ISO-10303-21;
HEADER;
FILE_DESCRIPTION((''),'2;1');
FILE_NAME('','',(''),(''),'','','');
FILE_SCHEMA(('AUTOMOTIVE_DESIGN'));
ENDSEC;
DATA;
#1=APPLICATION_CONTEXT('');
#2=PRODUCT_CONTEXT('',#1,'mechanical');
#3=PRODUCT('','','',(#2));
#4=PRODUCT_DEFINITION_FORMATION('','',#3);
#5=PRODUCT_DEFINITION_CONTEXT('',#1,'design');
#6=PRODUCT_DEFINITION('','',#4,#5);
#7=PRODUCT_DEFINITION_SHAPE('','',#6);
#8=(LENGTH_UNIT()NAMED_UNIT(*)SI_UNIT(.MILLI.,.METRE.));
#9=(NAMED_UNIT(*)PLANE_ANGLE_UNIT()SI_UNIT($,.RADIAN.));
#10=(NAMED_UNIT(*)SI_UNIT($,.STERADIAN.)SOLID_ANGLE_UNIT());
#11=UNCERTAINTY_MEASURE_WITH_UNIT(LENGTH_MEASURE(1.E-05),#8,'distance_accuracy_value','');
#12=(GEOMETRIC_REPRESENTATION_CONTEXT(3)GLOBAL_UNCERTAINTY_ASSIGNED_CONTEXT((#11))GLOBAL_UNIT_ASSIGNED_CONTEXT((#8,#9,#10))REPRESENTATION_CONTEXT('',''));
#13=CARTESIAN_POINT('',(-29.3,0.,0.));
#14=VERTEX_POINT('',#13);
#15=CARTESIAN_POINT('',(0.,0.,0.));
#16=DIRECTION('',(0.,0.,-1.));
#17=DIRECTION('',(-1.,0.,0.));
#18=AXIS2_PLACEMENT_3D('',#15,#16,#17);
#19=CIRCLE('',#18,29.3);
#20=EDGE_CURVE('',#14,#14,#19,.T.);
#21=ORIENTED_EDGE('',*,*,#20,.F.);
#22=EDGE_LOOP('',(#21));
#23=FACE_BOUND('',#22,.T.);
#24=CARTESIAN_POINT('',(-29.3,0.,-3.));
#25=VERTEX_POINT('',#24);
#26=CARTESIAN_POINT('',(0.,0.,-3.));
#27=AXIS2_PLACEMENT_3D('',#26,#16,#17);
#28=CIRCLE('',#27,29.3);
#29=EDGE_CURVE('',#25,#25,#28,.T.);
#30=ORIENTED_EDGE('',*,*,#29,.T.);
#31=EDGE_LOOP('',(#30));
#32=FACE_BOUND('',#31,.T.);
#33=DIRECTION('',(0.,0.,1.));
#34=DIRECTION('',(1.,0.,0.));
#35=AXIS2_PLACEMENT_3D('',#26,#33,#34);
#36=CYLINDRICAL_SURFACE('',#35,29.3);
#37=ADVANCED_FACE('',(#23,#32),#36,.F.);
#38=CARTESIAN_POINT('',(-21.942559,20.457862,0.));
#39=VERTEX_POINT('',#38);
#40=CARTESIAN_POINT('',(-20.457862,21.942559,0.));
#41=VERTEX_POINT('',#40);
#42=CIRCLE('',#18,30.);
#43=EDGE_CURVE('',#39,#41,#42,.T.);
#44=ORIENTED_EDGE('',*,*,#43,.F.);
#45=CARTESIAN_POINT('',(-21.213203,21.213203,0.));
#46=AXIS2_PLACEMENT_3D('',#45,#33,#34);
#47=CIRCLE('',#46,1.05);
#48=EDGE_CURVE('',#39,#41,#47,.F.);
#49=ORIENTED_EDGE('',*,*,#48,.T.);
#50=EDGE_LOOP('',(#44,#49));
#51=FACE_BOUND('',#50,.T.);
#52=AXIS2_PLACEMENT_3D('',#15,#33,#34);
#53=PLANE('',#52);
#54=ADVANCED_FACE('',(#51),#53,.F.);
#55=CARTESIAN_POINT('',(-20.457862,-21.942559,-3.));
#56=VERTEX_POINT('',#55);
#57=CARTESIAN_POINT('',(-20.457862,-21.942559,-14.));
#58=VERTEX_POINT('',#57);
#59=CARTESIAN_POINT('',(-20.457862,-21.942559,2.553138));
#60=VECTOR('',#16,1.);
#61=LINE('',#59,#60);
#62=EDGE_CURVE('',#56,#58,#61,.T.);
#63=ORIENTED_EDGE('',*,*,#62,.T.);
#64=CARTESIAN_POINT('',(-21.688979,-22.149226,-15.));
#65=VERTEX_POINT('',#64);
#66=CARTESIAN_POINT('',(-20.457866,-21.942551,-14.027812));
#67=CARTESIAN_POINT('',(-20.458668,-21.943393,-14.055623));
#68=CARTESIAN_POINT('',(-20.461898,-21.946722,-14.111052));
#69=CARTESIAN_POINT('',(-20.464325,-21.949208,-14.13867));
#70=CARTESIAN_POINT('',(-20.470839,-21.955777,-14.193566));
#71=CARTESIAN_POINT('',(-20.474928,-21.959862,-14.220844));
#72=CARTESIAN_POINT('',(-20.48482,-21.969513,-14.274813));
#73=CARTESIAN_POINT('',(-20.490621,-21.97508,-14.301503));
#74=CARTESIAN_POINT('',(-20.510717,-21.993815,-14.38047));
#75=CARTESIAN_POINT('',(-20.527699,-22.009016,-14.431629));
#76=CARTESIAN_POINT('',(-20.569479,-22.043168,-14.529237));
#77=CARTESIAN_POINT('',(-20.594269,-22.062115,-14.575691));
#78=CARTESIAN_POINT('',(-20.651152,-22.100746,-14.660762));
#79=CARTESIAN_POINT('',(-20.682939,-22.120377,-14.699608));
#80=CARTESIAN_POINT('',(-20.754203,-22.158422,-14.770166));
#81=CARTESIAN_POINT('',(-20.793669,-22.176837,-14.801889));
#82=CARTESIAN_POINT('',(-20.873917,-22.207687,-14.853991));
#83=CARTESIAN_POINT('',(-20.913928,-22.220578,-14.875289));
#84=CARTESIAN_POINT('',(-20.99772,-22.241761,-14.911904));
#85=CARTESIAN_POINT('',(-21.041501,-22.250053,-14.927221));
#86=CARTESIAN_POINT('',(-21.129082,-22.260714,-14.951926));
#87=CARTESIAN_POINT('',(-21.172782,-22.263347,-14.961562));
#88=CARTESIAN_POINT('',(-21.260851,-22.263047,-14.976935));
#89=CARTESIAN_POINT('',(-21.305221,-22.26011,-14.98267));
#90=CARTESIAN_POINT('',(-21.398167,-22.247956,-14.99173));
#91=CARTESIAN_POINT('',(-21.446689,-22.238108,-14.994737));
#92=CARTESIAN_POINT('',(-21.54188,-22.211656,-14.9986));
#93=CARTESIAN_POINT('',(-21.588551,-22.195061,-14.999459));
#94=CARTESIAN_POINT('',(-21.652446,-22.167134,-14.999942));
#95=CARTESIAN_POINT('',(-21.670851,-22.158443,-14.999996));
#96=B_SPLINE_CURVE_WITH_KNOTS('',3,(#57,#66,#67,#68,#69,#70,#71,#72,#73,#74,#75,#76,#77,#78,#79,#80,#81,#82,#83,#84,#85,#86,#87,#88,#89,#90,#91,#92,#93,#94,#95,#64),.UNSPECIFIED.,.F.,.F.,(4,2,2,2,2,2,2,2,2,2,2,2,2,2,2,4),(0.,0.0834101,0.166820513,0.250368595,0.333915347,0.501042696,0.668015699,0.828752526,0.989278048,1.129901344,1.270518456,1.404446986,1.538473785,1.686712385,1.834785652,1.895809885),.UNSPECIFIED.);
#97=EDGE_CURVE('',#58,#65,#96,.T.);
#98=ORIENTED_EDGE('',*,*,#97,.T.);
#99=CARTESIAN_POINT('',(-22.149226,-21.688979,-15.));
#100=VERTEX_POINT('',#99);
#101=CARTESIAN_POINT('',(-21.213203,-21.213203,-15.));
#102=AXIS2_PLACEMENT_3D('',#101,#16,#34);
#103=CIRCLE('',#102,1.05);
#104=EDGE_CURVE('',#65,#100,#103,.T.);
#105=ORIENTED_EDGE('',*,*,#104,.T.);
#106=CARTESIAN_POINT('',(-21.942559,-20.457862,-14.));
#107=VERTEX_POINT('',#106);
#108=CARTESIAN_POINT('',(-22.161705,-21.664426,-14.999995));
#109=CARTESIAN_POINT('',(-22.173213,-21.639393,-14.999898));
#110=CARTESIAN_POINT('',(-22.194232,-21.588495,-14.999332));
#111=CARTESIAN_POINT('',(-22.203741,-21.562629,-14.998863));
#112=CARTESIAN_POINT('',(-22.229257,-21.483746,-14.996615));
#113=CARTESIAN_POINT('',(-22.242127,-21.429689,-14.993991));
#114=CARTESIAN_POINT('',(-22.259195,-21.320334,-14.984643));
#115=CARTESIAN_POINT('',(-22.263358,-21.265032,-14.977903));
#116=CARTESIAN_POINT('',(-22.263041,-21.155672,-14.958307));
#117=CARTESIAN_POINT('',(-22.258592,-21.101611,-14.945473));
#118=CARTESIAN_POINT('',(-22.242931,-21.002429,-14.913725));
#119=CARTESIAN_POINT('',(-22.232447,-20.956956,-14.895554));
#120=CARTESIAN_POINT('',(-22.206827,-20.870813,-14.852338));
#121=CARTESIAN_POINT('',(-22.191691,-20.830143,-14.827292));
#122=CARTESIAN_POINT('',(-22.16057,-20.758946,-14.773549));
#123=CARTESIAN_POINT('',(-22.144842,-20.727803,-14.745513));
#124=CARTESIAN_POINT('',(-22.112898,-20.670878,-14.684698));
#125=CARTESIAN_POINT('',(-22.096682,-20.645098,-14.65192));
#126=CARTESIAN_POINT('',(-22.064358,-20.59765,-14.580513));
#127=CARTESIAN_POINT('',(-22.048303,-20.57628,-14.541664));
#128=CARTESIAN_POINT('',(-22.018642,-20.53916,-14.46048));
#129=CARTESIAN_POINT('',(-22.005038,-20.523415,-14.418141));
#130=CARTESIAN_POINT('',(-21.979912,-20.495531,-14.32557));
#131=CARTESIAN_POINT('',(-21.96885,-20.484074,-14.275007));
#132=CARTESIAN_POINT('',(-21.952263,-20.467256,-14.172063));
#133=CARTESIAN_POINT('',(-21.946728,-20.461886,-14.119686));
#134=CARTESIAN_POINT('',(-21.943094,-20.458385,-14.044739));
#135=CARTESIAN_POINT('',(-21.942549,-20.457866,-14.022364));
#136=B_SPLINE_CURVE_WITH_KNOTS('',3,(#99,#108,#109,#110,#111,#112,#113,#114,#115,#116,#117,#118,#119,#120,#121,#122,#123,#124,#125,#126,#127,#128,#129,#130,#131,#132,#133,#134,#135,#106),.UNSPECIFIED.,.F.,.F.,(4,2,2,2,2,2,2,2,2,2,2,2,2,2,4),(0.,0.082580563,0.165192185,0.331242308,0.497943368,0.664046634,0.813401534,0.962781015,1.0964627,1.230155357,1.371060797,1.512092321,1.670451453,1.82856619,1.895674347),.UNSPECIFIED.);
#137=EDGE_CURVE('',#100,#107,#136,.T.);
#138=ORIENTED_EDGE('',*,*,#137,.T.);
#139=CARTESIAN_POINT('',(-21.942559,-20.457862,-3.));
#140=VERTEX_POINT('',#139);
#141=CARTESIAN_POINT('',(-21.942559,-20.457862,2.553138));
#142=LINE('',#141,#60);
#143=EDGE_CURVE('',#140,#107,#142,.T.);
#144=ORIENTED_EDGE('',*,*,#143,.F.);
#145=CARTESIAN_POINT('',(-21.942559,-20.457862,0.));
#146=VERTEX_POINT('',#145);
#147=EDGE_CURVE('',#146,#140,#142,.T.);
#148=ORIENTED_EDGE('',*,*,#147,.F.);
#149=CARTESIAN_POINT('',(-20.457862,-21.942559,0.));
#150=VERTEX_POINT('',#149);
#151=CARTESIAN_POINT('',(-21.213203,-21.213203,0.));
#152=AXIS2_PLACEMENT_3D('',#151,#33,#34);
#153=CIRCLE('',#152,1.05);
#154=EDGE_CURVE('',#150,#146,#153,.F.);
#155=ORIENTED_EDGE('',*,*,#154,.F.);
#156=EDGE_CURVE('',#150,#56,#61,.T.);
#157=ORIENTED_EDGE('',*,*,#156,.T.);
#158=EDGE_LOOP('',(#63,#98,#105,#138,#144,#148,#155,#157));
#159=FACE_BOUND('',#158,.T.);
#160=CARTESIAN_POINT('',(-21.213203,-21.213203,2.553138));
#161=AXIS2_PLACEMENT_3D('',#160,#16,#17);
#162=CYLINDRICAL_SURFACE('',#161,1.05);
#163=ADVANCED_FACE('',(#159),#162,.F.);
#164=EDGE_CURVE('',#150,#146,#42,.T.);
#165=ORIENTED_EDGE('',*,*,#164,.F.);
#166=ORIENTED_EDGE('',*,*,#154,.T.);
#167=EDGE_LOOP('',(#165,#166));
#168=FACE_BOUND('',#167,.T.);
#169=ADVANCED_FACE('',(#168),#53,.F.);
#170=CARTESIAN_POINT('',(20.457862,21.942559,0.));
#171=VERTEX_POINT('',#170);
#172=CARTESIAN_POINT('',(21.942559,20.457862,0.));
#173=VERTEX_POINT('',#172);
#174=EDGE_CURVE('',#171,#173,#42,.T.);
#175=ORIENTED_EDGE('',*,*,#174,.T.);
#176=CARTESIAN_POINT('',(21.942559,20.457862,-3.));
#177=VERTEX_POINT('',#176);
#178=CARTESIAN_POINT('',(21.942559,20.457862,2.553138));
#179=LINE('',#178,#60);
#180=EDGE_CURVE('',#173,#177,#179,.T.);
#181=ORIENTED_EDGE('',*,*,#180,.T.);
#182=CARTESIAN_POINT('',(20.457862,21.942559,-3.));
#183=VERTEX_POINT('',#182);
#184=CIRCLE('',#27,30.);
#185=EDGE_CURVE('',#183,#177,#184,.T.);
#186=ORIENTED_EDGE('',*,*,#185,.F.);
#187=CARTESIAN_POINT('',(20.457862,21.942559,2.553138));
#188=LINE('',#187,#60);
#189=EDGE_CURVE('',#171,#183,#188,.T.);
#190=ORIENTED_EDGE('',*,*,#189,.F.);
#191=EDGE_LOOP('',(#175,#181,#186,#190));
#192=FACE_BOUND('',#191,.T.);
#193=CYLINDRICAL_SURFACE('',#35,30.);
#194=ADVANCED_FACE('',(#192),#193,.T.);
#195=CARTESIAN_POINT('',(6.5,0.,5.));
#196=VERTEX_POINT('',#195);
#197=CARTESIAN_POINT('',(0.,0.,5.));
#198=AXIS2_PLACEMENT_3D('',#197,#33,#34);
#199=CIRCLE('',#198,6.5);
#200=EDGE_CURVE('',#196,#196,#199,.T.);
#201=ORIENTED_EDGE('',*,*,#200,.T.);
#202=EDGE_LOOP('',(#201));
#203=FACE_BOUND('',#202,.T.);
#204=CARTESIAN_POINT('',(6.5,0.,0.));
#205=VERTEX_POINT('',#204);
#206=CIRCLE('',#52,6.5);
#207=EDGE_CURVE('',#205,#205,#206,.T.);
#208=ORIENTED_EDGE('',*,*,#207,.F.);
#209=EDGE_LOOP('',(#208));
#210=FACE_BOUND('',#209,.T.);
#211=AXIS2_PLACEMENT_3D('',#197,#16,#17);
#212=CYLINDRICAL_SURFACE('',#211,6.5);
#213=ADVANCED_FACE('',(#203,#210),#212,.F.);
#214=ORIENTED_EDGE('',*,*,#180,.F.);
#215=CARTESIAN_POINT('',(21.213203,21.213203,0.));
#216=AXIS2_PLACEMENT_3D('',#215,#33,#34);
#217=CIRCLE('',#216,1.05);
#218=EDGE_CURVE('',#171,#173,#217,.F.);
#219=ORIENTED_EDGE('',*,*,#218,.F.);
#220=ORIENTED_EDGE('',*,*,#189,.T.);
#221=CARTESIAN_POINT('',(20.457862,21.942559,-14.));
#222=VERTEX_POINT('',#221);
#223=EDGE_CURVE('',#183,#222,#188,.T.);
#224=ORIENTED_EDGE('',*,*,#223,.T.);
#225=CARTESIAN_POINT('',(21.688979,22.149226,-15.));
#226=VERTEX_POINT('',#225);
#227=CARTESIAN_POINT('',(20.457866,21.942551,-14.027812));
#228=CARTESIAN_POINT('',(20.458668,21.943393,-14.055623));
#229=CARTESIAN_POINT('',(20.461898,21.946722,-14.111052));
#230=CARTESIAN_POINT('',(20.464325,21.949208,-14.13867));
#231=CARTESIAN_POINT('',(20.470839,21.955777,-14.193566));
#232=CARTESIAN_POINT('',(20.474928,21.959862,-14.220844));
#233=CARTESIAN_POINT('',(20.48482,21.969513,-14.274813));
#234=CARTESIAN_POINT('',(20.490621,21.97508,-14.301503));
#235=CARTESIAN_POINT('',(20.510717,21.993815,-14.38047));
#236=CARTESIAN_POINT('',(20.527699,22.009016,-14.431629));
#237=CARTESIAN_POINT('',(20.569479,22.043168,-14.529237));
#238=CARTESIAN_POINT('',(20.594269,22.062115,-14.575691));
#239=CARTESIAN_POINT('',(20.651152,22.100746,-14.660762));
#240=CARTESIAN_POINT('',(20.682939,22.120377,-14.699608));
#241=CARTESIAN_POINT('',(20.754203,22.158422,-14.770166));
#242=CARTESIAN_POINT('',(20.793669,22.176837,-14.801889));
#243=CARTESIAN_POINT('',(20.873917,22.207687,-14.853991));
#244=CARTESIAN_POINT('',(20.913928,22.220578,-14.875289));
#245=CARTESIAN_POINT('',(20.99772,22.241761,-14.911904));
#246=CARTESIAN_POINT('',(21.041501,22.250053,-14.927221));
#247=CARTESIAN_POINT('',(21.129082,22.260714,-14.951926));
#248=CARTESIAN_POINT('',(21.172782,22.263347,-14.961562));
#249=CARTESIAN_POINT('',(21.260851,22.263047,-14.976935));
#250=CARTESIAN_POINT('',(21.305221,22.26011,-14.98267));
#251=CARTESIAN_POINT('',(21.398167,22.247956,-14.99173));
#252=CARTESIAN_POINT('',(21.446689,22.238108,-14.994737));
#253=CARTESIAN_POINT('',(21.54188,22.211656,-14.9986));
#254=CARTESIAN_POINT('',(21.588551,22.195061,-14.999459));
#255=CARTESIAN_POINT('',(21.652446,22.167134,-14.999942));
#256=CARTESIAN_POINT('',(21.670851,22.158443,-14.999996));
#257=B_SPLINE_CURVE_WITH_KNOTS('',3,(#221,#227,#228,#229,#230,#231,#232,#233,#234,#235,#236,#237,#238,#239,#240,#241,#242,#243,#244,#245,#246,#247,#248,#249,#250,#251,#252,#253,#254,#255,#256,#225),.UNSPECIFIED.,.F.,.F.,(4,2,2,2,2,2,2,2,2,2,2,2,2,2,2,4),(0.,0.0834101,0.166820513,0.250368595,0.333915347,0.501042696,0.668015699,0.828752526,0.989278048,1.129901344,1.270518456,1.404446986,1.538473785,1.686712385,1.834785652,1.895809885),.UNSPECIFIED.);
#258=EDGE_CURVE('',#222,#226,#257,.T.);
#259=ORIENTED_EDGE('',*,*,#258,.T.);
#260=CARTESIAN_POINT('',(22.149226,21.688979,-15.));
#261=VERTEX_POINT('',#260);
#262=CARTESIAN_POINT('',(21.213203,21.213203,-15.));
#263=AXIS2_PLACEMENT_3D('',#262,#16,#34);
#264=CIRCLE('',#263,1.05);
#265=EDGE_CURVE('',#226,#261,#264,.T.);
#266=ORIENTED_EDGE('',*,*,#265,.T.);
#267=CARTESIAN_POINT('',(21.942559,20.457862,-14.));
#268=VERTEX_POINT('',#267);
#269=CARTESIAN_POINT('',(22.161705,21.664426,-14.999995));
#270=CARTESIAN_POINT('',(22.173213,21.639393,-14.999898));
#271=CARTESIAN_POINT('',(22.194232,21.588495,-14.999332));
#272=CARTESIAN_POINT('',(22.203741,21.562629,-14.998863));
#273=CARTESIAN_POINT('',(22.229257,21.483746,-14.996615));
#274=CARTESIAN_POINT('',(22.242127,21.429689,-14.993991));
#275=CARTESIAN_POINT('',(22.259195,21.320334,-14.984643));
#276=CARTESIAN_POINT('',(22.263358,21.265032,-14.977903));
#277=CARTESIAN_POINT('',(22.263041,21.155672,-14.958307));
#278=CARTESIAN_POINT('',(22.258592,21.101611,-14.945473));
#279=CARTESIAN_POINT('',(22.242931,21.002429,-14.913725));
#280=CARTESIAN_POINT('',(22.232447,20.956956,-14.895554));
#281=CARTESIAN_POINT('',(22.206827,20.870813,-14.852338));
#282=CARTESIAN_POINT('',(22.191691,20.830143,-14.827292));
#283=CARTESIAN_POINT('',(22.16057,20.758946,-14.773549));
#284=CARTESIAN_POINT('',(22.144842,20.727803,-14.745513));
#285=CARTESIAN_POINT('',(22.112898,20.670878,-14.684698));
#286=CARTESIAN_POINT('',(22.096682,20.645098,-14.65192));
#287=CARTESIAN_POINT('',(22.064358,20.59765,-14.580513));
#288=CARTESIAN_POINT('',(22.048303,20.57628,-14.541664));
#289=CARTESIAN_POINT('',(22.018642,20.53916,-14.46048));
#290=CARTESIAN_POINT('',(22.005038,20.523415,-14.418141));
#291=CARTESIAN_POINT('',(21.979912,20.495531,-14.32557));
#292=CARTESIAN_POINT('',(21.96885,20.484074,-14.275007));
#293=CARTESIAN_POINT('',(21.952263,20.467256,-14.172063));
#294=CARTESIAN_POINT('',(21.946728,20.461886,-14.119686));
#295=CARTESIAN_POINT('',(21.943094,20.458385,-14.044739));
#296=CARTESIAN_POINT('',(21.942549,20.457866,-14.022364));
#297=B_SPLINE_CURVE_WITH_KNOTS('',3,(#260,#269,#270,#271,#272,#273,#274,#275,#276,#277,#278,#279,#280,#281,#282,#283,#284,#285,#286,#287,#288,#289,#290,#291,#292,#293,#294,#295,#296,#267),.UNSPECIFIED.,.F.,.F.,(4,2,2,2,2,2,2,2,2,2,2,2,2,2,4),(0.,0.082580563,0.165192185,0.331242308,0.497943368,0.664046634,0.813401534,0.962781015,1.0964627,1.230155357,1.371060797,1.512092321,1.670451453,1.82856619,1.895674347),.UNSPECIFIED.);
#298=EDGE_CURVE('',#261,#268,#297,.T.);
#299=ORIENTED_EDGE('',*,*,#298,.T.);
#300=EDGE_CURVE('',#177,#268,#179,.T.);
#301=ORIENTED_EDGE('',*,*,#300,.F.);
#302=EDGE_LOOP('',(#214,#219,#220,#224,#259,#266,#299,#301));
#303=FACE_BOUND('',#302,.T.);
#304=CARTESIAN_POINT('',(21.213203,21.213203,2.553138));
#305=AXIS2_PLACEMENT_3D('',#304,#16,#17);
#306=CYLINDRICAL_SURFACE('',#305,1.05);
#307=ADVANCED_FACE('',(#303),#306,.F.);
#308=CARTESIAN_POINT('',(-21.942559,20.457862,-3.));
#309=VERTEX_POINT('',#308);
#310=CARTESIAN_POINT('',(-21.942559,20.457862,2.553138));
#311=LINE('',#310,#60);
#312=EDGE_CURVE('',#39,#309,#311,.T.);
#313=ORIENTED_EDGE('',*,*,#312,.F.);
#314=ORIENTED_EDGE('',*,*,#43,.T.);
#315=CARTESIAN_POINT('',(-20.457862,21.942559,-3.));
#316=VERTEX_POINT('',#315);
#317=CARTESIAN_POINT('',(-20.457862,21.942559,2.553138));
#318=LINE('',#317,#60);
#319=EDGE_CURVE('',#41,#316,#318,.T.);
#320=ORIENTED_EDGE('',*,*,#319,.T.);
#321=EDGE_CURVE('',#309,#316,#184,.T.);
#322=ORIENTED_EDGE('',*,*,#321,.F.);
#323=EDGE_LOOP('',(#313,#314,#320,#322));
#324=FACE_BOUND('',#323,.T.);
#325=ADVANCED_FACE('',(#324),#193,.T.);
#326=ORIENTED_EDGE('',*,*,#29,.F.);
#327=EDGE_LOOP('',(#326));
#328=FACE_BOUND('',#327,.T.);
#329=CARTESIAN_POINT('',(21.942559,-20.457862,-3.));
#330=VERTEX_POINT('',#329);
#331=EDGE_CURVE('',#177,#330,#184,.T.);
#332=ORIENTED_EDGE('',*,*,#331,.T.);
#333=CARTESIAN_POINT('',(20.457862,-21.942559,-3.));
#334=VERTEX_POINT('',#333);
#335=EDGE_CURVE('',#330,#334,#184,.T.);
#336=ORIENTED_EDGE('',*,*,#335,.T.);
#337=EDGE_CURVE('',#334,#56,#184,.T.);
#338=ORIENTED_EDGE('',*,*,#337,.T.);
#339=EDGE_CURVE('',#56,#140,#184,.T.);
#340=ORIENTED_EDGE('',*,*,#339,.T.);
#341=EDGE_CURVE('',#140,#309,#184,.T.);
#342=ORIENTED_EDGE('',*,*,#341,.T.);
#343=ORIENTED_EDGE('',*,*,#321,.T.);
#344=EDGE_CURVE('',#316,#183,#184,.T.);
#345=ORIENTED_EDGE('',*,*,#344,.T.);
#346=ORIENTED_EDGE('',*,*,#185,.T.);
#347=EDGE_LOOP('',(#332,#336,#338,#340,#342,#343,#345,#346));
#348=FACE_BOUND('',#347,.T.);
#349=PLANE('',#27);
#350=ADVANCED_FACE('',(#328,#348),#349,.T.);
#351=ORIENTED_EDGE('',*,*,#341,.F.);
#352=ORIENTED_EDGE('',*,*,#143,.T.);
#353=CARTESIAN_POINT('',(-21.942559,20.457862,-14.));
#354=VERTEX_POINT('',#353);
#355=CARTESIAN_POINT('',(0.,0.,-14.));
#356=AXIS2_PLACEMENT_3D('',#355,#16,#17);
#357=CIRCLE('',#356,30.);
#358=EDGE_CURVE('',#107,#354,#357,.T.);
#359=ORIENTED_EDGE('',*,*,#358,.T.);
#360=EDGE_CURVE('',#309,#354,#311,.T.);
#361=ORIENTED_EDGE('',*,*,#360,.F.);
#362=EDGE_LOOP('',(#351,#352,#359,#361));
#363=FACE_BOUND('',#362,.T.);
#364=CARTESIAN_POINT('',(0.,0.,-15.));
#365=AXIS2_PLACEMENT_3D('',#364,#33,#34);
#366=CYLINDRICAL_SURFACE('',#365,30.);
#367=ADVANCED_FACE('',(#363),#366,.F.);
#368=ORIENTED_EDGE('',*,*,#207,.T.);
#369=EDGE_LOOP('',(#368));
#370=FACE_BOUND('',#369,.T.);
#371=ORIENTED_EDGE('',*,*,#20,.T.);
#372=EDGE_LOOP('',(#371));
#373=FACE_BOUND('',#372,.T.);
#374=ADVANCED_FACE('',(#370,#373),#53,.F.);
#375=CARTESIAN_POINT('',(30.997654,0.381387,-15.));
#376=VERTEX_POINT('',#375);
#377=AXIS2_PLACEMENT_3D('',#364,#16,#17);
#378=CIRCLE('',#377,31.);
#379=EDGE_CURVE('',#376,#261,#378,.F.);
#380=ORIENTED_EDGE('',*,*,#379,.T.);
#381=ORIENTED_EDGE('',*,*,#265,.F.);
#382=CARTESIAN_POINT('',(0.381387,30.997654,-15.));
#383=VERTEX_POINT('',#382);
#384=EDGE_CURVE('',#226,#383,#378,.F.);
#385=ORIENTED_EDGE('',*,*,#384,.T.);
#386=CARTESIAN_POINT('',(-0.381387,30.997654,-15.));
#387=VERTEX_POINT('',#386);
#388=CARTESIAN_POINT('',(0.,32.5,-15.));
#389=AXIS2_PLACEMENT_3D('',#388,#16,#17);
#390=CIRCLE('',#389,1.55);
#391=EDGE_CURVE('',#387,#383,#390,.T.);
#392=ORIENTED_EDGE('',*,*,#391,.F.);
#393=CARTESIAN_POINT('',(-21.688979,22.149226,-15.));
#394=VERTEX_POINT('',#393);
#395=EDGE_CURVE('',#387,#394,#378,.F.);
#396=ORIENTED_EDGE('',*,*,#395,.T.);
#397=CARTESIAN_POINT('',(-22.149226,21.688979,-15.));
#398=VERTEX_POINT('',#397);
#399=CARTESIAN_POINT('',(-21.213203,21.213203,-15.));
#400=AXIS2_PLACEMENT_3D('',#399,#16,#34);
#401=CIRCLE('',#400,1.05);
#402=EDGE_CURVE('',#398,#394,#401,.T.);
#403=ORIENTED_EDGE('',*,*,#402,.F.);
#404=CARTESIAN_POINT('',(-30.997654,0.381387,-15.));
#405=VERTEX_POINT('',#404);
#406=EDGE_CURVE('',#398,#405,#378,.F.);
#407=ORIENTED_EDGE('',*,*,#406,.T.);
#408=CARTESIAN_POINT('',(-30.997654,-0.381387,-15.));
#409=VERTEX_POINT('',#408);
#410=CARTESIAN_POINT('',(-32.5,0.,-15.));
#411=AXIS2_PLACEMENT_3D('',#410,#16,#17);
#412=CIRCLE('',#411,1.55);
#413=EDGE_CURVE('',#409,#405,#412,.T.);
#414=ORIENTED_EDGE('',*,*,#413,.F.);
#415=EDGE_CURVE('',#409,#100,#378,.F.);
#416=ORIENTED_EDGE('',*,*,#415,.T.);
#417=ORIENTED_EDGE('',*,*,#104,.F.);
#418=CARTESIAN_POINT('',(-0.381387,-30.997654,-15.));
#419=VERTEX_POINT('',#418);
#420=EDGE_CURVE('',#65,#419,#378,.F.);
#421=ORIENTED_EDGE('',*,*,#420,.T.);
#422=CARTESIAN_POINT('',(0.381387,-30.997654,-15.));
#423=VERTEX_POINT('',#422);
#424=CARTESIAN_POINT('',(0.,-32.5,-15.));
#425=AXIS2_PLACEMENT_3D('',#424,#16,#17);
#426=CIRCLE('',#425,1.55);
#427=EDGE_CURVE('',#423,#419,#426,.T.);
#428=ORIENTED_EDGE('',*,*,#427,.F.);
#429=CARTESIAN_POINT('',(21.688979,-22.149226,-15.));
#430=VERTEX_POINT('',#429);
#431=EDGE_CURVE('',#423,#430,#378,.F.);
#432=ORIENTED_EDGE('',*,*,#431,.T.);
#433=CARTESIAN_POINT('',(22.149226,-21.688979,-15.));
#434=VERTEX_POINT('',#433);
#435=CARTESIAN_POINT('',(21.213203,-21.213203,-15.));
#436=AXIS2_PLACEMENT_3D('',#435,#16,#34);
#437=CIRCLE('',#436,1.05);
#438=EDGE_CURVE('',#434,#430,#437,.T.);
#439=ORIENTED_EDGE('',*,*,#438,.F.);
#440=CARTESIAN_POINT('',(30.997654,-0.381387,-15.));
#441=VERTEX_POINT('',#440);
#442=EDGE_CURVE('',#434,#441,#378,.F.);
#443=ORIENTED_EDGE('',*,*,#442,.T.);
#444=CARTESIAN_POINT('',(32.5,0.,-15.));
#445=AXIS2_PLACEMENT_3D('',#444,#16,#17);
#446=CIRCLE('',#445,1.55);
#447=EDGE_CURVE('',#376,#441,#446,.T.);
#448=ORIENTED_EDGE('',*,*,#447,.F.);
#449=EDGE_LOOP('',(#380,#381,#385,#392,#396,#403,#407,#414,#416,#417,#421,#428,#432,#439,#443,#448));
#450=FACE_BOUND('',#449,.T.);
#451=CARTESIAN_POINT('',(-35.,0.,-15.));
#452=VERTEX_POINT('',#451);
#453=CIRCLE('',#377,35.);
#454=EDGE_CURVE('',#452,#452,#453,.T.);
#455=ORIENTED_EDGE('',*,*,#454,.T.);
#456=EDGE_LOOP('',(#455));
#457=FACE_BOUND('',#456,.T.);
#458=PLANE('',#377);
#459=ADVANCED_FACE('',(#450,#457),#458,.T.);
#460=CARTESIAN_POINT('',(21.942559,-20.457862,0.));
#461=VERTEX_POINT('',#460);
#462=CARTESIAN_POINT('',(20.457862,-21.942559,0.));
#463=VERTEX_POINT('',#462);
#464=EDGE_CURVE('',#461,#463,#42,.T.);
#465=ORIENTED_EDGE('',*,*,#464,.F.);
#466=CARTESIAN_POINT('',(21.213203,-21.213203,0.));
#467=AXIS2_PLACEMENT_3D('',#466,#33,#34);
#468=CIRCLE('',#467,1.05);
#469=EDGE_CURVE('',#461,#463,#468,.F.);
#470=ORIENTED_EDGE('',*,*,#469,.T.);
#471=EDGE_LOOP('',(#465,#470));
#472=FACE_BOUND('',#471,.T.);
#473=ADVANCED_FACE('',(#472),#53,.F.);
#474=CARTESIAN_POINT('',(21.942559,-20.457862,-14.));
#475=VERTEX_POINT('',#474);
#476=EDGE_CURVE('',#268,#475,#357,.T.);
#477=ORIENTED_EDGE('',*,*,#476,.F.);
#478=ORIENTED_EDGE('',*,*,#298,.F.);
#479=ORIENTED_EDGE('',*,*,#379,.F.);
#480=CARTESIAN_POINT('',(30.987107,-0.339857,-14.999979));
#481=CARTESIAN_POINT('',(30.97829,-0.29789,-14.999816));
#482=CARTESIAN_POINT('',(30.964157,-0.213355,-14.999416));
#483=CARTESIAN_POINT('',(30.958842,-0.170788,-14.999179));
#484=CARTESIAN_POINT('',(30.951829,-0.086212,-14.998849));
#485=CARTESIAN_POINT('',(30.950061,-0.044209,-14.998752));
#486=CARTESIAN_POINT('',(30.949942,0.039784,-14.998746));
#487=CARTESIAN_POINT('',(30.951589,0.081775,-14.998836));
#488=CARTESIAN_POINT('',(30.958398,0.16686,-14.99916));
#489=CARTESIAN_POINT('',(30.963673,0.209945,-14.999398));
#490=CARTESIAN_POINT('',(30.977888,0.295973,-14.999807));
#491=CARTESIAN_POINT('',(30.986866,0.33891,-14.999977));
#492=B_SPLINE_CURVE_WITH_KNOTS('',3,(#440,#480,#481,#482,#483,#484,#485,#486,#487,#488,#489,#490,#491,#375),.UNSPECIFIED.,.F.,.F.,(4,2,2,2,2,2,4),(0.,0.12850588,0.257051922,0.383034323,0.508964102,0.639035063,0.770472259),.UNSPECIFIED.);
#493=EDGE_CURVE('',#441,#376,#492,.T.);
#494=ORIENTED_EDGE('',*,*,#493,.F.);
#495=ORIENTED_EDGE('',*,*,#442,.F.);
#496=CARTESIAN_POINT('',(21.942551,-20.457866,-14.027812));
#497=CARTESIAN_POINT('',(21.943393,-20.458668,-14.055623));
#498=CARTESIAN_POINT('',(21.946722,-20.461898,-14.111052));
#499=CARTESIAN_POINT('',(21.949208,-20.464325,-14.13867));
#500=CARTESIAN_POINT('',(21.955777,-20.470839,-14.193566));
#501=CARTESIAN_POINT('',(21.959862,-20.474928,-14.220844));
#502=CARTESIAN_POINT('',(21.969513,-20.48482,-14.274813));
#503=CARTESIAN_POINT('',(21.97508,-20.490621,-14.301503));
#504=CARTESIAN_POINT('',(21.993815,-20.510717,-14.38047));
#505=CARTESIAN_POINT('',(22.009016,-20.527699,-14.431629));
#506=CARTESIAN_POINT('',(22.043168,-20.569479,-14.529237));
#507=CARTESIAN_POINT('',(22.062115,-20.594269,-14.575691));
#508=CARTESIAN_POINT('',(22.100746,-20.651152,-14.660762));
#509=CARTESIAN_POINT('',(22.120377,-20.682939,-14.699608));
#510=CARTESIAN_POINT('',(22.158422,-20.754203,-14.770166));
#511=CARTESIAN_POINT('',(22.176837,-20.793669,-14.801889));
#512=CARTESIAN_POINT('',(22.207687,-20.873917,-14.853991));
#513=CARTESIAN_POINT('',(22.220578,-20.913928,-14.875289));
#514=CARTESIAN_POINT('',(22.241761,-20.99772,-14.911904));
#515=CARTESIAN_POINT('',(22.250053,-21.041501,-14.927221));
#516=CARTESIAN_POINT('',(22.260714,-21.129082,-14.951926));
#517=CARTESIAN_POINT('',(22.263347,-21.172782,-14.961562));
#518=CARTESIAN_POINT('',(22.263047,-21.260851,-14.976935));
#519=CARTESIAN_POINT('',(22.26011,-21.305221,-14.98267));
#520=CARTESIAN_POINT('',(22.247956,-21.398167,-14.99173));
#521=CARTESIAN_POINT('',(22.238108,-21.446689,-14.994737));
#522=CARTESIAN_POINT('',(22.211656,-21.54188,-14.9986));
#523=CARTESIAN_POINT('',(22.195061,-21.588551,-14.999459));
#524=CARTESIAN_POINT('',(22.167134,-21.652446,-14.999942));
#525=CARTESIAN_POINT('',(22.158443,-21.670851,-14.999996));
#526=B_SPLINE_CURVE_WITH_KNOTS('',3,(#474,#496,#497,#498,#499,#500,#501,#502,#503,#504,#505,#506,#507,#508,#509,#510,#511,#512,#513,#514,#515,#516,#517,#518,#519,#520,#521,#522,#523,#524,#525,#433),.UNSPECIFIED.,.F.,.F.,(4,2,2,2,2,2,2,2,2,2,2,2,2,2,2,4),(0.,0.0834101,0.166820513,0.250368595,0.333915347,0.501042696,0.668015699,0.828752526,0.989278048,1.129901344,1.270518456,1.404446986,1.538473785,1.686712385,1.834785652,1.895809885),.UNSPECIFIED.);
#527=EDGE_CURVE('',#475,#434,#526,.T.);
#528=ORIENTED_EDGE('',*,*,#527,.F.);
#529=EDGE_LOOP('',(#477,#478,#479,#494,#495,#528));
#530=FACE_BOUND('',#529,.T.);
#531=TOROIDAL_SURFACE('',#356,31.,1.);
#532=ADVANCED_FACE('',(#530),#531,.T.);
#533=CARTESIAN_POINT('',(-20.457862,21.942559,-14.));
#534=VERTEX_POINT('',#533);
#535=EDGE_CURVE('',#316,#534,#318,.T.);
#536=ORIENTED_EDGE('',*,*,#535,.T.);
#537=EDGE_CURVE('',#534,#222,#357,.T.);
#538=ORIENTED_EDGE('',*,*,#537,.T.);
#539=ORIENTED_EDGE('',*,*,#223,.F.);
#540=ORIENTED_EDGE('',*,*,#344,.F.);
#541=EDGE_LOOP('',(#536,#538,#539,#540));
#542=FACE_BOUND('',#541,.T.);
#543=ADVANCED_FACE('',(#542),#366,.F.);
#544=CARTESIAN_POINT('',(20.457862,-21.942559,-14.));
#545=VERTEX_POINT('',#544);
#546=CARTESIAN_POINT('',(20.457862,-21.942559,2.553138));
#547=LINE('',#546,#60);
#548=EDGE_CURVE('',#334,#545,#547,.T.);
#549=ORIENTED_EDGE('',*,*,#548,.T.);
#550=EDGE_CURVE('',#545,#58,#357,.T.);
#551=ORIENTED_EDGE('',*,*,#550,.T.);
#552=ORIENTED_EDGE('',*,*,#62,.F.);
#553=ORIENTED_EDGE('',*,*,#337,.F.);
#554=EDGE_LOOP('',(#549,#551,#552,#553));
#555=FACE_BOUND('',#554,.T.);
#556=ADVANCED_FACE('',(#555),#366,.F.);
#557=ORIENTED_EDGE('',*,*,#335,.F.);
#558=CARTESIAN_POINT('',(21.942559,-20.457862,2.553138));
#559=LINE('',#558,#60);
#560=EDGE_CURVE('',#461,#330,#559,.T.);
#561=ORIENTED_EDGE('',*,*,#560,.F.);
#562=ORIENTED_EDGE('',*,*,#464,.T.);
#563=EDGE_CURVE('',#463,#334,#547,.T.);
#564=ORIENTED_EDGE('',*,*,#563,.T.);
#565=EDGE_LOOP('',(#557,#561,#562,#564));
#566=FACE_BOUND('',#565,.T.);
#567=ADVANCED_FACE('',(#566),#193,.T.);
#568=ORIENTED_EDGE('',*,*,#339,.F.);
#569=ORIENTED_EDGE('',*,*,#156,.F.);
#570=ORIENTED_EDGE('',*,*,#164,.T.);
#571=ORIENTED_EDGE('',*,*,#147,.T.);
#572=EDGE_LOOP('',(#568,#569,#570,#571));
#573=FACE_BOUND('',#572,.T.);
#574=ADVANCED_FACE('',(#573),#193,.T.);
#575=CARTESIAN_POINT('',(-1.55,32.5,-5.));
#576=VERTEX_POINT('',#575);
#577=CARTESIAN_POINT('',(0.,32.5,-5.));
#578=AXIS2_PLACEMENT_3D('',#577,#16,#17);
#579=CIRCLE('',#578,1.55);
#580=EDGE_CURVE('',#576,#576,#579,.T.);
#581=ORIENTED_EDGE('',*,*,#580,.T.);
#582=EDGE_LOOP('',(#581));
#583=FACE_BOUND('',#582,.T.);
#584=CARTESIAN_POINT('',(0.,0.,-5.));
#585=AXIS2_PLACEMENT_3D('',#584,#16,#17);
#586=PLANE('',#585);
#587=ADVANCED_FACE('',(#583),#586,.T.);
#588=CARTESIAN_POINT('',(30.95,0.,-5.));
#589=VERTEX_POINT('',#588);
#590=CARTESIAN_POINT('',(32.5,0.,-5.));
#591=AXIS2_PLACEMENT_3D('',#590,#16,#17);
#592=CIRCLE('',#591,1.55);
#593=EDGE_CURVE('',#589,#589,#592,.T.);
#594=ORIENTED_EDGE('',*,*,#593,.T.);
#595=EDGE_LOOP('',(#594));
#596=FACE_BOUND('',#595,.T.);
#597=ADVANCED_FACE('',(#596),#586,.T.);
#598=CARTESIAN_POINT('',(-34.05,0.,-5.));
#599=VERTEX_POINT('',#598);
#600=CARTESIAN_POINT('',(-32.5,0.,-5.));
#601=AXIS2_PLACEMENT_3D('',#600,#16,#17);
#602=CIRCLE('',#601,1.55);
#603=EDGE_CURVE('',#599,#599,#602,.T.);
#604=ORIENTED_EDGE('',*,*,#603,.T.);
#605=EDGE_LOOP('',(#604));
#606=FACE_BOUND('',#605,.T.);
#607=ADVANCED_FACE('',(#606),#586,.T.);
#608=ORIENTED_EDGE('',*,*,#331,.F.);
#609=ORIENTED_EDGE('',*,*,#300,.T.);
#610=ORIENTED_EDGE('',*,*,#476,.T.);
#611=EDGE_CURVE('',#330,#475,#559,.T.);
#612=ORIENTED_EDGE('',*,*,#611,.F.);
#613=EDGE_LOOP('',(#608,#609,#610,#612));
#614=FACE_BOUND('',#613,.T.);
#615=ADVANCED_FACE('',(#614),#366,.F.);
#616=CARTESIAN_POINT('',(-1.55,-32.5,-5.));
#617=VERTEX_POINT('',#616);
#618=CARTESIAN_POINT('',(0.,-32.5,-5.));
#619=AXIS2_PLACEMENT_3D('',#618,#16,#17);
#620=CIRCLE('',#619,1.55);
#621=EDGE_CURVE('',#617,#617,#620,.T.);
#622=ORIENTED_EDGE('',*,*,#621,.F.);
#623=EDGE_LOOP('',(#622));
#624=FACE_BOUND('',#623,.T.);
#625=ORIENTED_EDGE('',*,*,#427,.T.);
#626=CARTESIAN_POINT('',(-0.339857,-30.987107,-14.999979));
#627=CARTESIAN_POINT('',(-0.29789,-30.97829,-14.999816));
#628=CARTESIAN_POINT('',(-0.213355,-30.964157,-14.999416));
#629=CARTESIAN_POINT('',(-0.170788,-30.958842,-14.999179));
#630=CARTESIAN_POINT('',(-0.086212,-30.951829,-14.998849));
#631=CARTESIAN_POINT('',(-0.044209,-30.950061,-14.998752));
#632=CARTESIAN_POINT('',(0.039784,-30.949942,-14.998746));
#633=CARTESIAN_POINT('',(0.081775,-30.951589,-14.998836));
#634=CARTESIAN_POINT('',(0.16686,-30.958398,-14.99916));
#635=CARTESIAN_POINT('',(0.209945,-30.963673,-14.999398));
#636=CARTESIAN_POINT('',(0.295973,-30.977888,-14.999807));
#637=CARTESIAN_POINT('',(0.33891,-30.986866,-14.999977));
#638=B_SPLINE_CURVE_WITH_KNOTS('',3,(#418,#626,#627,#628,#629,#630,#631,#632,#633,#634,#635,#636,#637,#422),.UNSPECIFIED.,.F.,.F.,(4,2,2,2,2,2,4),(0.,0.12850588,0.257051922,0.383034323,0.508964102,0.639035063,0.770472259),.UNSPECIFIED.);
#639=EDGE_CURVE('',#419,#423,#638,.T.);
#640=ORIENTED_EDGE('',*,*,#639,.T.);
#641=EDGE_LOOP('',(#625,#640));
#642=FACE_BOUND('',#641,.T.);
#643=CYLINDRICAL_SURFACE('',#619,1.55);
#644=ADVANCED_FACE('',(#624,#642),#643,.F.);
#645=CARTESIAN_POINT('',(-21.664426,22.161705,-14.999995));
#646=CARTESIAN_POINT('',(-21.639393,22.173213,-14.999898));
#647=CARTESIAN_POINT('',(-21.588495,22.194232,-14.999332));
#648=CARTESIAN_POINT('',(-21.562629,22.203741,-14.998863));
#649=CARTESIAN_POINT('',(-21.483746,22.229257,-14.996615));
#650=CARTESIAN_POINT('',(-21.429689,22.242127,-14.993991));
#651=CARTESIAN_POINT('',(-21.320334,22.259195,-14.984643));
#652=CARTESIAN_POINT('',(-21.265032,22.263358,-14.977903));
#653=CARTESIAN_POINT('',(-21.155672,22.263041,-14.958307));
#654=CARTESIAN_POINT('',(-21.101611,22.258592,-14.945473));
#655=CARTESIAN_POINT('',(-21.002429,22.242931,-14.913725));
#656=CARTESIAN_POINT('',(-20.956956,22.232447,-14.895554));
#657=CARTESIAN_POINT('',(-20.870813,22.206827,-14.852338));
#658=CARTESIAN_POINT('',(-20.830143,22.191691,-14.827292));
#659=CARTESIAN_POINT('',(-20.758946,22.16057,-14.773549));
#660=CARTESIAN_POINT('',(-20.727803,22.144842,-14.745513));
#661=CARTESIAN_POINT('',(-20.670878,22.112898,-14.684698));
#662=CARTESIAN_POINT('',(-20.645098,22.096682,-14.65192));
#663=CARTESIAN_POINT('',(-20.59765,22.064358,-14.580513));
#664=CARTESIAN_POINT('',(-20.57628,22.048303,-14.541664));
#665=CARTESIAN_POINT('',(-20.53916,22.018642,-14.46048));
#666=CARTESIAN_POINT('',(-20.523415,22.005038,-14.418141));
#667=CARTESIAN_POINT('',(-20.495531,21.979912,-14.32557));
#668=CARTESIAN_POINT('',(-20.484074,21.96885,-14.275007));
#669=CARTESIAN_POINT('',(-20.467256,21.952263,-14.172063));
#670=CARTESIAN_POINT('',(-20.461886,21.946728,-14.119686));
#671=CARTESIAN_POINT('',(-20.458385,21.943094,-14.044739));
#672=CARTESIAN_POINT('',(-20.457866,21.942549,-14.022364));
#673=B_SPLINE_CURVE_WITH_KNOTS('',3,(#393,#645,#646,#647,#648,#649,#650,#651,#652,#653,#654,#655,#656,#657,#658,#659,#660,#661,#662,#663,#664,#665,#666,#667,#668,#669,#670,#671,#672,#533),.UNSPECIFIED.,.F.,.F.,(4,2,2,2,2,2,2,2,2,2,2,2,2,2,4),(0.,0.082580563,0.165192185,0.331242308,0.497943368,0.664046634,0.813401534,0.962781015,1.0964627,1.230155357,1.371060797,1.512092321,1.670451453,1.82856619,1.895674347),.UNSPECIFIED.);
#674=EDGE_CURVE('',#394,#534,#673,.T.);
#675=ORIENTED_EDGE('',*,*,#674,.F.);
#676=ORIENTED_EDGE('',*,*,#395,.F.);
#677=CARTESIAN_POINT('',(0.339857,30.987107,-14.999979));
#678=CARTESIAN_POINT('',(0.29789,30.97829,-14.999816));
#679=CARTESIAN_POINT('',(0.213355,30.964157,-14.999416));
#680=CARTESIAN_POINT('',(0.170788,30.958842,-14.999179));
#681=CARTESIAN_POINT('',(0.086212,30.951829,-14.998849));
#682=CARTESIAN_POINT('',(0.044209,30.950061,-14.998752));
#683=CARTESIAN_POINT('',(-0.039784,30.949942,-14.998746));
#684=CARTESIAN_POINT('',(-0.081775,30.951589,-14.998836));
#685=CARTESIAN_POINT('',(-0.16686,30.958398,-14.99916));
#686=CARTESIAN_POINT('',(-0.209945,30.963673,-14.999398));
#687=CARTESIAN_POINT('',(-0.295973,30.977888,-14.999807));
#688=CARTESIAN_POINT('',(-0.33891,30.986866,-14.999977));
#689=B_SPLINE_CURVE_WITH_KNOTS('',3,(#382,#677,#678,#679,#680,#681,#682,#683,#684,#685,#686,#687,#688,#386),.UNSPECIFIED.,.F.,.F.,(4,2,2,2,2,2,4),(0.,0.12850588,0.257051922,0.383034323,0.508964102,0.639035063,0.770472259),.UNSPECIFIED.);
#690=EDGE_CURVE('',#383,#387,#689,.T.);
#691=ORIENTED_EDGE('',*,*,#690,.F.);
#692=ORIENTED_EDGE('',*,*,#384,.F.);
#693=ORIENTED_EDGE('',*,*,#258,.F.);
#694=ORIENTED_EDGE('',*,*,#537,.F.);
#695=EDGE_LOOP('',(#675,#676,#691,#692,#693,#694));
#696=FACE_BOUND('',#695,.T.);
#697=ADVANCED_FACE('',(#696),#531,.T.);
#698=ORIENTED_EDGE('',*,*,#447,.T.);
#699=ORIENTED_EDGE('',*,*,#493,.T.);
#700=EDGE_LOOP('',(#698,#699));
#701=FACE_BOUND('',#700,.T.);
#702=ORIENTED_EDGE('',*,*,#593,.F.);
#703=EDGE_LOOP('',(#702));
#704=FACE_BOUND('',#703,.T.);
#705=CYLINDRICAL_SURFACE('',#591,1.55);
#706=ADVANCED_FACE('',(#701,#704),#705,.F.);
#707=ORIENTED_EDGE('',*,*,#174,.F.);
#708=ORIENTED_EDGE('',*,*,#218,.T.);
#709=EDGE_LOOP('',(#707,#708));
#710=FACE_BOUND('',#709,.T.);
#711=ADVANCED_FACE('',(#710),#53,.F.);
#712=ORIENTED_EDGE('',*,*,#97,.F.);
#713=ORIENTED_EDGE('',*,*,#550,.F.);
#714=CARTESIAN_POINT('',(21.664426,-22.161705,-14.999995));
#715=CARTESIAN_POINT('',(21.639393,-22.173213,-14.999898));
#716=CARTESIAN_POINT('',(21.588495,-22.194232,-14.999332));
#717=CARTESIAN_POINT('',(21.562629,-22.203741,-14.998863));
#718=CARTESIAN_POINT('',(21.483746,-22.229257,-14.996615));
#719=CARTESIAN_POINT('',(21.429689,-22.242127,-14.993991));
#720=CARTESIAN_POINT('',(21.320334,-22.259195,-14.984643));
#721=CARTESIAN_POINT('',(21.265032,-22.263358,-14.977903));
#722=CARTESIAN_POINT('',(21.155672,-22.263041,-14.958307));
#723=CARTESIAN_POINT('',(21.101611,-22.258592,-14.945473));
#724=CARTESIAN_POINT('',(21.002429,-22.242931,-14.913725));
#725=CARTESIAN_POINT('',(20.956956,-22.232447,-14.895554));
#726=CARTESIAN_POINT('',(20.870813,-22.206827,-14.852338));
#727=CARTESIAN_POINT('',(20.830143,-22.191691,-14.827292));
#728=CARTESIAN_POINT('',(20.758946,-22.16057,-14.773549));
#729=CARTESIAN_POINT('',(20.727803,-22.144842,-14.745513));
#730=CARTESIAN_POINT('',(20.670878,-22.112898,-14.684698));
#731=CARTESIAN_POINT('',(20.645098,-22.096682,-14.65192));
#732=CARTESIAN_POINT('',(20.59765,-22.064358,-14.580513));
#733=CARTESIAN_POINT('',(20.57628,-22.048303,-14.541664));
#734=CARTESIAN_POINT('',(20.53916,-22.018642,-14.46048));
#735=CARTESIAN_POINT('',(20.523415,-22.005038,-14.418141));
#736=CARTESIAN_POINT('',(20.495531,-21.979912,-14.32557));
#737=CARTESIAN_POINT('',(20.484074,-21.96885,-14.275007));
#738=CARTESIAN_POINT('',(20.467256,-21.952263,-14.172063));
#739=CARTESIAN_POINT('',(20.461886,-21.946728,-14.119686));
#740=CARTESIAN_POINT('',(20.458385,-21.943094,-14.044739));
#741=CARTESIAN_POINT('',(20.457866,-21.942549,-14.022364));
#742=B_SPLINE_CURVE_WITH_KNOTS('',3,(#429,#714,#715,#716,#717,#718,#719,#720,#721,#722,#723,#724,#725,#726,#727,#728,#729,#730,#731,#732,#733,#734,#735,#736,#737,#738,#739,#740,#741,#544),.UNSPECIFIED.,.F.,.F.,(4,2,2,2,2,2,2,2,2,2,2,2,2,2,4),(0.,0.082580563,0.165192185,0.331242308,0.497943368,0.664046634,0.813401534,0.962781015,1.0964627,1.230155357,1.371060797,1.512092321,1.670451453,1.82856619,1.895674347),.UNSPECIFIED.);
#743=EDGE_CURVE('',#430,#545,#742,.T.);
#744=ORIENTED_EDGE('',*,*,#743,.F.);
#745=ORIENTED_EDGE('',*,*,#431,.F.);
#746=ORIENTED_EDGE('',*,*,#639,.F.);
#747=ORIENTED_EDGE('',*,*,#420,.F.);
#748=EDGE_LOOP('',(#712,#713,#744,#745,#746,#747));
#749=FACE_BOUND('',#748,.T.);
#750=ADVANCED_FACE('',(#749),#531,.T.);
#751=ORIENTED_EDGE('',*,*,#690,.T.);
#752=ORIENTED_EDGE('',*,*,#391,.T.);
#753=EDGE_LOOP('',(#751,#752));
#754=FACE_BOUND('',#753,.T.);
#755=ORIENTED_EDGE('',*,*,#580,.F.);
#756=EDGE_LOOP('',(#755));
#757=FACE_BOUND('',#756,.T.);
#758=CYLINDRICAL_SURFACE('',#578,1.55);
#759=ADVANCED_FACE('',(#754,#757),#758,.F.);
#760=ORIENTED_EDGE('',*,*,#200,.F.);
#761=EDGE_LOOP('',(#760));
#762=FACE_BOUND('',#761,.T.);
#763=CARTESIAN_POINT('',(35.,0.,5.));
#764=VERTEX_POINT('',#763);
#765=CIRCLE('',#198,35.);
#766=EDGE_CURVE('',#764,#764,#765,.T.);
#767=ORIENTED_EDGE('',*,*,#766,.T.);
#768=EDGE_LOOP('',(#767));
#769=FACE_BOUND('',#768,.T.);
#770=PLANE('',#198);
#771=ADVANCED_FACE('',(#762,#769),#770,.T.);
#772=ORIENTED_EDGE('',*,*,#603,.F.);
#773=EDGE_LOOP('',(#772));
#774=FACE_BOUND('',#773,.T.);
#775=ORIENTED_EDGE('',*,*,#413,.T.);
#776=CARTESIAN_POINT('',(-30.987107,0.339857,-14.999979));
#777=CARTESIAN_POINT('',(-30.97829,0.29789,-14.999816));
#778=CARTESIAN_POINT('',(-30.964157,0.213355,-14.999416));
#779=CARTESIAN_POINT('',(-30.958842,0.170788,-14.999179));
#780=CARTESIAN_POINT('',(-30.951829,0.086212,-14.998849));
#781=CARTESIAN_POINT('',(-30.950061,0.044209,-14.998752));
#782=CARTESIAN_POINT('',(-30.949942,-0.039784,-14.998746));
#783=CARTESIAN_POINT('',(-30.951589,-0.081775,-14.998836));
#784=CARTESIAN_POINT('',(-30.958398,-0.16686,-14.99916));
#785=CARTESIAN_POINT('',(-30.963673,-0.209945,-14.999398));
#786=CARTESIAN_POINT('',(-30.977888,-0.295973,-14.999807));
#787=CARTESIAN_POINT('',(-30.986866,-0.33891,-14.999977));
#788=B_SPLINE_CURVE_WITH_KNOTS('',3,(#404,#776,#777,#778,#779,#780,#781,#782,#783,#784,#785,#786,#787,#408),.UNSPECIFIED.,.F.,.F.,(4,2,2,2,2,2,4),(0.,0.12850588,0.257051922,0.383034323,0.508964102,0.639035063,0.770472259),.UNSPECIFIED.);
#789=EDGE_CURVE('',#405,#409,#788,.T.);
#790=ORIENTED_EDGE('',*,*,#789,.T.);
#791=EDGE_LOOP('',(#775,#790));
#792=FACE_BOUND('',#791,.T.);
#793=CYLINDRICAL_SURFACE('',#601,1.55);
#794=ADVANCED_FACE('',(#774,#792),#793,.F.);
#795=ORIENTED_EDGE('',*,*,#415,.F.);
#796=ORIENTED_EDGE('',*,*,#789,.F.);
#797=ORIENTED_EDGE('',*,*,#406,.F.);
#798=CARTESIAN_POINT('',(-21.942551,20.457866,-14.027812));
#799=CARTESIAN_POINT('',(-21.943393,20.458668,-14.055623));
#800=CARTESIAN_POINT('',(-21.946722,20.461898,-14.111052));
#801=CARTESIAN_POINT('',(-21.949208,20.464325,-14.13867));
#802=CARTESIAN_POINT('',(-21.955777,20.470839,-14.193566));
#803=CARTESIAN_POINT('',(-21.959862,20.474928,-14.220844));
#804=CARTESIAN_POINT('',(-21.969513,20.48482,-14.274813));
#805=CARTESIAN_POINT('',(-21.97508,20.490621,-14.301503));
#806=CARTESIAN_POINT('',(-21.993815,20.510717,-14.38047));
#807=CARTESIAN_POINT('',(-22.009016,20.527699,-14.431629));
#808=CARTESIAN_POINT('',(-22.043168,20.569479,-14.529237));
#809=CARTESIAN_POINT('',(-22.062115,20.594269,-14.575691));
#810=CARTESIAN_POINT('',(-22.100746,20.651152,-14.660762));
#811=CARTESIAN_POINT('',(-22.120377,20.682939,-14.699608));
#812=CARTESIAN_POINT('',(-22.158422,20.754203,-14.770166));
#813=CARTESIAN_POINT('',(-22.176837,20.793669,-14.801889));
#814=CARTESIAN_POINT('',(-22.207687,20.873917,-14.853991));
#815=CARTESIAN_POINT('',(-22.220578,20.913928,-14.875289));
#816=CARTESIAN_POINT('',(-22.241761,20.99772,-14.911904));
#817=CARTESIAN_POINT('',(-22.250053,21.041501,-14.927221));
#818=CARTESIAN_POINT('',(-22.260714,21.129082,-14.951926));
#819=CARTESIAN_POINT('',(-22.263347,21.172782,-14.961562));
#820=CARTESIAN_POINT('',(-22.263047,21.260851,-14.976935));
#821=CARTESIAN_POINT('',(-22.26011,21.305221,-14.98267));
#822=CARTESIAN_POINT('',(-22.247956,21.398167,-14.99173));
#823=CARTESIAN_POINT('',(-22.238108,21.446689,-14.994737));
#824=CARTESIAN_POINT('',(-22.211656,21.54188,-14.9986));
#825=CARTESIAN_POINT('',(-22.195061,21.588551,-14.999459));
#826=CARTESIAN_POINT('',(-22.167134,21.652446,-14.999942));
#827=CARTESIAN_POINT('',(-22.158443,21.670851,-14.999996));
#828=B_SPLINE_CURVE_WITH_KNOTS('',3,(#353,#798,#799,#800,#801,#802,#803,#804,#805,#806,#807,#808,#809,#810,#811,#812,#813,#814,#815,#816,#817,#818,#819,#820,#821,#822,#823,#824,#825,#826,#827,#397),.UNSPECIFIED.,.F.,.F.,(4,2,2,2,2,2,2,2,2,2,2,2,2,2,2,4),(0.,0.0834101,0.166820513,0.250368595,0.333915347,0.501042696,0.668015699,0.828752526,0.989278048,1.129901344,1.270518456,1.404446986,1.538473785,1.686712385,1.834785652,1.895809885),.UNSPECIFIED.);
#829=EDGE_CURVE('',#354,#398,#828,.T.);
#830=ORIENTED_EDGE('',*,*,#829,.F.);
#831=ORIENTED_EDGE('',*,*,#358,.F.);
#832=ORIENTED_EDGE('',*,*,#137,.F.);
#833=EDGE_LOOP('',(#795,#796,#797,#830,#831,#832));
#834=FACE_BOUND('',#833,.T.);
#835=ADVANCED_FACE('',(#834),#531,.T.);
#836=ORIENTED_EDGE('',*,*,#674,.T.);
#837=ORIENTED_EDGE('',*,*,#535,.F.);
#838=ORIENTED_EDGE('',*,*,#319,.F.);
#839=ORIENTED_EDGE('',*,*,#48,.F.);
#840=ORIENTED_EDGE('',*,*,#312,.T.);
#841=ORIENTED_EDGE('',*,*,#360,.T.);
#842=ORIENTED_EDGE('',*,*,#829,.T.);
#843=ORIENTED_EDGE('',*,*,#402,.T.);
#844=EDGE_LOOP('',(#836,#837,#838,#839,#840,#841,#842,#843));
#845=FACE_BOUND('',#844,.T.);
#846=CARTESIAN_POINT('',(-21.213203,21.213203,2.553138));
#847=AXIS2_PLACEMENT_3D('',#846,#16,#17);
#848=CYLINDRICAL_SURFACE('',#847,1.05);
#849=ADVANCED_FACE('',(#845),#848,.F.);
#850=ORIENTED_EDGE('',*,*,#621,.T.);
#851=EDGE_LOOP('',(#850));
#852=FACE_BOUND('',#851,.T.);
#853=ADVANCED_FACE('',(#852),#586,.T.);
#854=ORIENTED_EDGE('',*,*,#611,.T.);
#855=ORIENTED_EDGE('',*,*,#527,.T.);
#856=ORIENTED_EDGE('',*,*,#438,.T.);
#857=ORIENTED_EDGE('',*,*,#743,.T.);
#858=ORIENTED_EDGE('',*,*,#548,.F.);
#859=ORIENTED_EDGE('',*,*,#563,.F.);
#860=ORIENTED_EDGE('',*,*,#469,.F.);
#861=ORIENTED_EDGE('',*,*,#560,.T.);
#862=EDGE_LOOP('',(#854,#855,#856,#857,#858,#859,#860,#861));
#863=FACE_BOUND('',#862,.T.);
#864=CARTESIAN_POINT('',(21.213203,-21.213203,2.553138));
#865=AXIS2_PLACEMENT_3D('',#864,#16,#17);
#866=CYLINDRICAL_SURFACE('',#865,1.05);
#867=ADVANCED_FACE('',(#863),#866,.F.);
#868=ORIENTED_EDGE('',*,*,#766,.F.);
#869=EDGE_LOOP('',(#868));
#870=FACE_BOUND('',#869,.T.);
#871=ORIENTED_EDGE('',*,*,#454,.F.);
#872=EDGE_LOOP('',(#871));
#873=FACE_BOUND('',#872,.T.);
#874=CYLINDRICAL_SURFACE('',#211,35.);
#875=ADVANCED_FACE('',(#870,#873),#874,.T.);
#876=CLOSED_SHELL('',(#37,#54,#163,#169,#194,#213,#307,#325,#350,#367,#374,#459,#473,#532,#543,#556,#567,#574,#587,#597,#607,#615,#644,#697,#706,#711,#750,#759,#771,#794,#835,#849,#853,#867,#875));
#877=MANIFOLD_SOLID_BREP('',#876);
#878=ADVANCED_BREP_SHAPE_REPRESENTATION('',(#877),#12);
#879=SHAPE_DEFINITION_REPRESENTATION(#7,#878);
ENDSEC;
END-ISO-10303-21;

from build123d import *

# Parameters (mm, degrees)
SKETCH_2_R          = 35
SKETCH_2_R_2        = 6.5
EXTRUDE_1_DEPTH     = 5
EXTRUDE_START       = 15
SKETCH_3_R          = 35
SKETCH_3_R_2        = 30
EXTRUDE_2_DEPTH     = 15
SKETCH_4_R          = 1.55
CUT_EXTRUDE_1_DEPTH = 10
CUT_EXTRUDE_5_DEPTH = 15
FILLET_1_R          = 1
EXTRUDE_START_2     = 3
SKETCH_10_R         = 30
SKETCH_10_R_2       = 29.3
EXTRUDE_3_DEPTH     = 3


with BuildPart() as part:
    # 草图2 → 凸台-拉伸1 (new body)
    with BuildSketch(Plane.XY):
        Circle(SKETCH_2_R)
        Circle(SKETCH_2_R_2, mode=Mode.SUBTRACT)
    extrude(amount=EXTRUDE_1_DEPTH)

    # 草图3 → 凸台-拉伸2 (add)
    with BuildSketch(Plane(origin=(0, 0, 0), x_dir=(-1, 0, 0), z_dir=(0, 0, -1)).offset(EXTRUDE_START)):
        Circle(SKETCH_3_R)
        Circle(SKETCH_3_R_2, mode=Mode.SUBTRACT)
    extrude(amount=-EXTRUDE_2_DEPTH)

    # 草图4 → 切除-拉伸1 (cut)
    with BuildSketch(Plane(origin=(0, 0, -15), x_dir=(-1, 0, 0), z_dir=(0, 0, -1))):
        with Locations((0, 32.5)):
            Circle(SKETCH_4_R)
        with Locations((32.5, 0)):
            Circle(SKETCH_4_R)
        with Locations((0, -32.5)):
            Circle(SKETCH_4_R)
        with Locations((-32.5, 0)):
            Circle(SKETCH_4_R)
    extrude(amount=-CUT_EXTRUDE_1_DEPTH, mode=Mode.SUBTRACT)

    # 草图9 → 切除-拉伸5 (cut)
    with BuildSketch(Plane(origin=(0, 0, -15), x_dir=(-1, 0, 0), z_dir=(0, 0, -1))):
        with BuildLine():
            ThreePointArc((-21.942558771, 20.457861926), (-21.955665556, 21.955665556), (-20.457861926, 21.942558771))
            ThreePointArc((-20.457861926, 21.942558771), (-21.213203436, 21.213203436), (-21.942558771, 20.457861926))
        make_face()
        with BuildLine():
            ThreePointArc((20.457861926, 21.942558771), (21.955665556, 21.955665556), (21.942558771, 20.457861926))
            ThreePointArc((21.942558771, 20.457861926), (21.213203436, 21.213203436), (20.457861926, 21.942558771))
        make_face()
        with BuildLine():
            ThreePointArc((21.942558771, -20.457861926), (21.955665556, -21.955665556), (20.457861926, -21.942558771))
            ThreePointArc((20.457861926, -21.942558771), (21.213203436, -21.213203436), (21.942558771, -20.457861926))
        make_face()
        with BuildLine():
            ThreePointArc((-20.457861926, -21.942558771), (-21.955665556, -21.955665556), (-21.942558771, -20.457861926))
            ThreePointArc((-21.942558771, -20.457861926), (-21.213203436, -21.213203436), (-20.457861926, -21.942558771))
        make_face()
    extrude(amount=-CUT_EXTRUDE_5_DEPTH, mode=Mode.SUBTRACT)

    # 圆角1
    # the kernel refuses this fillet: 1 mm, written as the material it takes off along each edge
    with BuildSketch(Plane(origin=(0, 0, -15), x_dir=(-0.740463861633537, 0.6720961758667804, 0), z_dir=(-0.6720961758667804, -0.740463861633537, 0))) as fillet_1_piece_1:
        with BuildLine():
            CenterArc((30 + FILLET_1_R, -FILLET_1_R), FILLET_1_R, 90, 90)
            Line((30, -FILLET_1_R), (30, 0))
            Line((30, 0), (30 + FILLET_1_R, 0))
        make_face()
    revolve(axis=Axis((0, 0, -15), (0, 0, -1)), revolution_arc=95.541888931, mode=Mode.SUBTRACT)
    with BuildSketch(Plane(origin=(0, 0, -15), x_dir=(0.6720961758667806, 0.7404638616335367, 0), z_dir=(-0.7404638616335367, 0.6720961758667806, 0))) as fillet_1_piece_2:
        with BuildLine():
            CenterArc((30 + FILLET_1_R, -FILLET_1_R), FILLET_1_R, 90, 90)
            Line((30, -FILLET_1_R), (30, 0))
            Line((30, 0), (30 + FILLET_1_R, 0))
        make_face()
    revolve(axis=Axis((0, 0, -15), (0, 0, -1)), revolution_arc=95.541888931, mode=Mode.SUBTRACT)
    with BuildSketch(Plane(origin=(0, 0, -15), x_dir=(0.7404638616335368, -0.6720961758667805, 0), z_dir=(0.6720961758667805, 0.7404638616335368, 0))) as fillet_1_piece_3:
        with BuildLine():
            CenterArc((30 + FILLET_1_R, -FILLET_1_R), FILLET_1_R, 90, 90)
            Line((30, -FILLET_1_R), (30, 0))
            Line((30, 0), (30 + FILLET_1_R, 0))
        make_face()
    revolve(axis=Axis((0, 0, -15), (0, 0, -1)), revolution_arc=95.541888931, mode=Mode.SUBTRACT)
    with BuildSketch(Plane(origin=(0, 0, -15), x_dir=(-1, 0, 0), z_dir=(0, -1, 0))) as fillet_1_piece_4:
        with BuildLine():
            CenterArc((30 + FILLET_1_R, -FILLET_1_R), FILLET_1_R, 90, 90)
            Line((30, -FILLET_1_R), (30, 0))
            Line((30, 0), (30 + FILLET_1_R, 0))
        make_face()
    revolve(axis=Axis((0, 0, -15), (0, 0, -1)), revolution_arc=47.769631262, mode=Mode.SUBTRACT)
    with BuildSketch(Plane(origin=(0, 0, -15), x_dir=(-0.6721131469252694, -0.7404484571732264, 0), z_dir=(0.7404484571732264, -0.6721131469252694, 0))) as fillet_1_piece_5:
        with BuildLine():
            CenterArc((30 + FILLET_1_R, -FILLET_1_R), FILLET_1_R, 90, 90)
            Line((30, -FILLET_1_R), (30, 0))
            Line((30, 0), (30 + FILLET_1_R, 0))
        make_face()
    revolve(axis=Axis((0, 0, -15), (0, 0, -1)), revolution_arc=47.769631262, mode=Mode.SUBTRACT)

    # 草图10 → 凸台-拉伸3 (add)
    with BuildSketch(Plane(origin=(0, 0, 0), x_dir=(-1, 0, 0), z_dir=(0, 0, -1)).offset(EXTRUDE_START_2)):
        Circle(SKETCH_10_R)
        Circle(SKETCH_10_R_2, mode=Mode.SUBTRACT)
    extrude(amount=-EXTRUDE_3_DEPTH)


solid = part.part
